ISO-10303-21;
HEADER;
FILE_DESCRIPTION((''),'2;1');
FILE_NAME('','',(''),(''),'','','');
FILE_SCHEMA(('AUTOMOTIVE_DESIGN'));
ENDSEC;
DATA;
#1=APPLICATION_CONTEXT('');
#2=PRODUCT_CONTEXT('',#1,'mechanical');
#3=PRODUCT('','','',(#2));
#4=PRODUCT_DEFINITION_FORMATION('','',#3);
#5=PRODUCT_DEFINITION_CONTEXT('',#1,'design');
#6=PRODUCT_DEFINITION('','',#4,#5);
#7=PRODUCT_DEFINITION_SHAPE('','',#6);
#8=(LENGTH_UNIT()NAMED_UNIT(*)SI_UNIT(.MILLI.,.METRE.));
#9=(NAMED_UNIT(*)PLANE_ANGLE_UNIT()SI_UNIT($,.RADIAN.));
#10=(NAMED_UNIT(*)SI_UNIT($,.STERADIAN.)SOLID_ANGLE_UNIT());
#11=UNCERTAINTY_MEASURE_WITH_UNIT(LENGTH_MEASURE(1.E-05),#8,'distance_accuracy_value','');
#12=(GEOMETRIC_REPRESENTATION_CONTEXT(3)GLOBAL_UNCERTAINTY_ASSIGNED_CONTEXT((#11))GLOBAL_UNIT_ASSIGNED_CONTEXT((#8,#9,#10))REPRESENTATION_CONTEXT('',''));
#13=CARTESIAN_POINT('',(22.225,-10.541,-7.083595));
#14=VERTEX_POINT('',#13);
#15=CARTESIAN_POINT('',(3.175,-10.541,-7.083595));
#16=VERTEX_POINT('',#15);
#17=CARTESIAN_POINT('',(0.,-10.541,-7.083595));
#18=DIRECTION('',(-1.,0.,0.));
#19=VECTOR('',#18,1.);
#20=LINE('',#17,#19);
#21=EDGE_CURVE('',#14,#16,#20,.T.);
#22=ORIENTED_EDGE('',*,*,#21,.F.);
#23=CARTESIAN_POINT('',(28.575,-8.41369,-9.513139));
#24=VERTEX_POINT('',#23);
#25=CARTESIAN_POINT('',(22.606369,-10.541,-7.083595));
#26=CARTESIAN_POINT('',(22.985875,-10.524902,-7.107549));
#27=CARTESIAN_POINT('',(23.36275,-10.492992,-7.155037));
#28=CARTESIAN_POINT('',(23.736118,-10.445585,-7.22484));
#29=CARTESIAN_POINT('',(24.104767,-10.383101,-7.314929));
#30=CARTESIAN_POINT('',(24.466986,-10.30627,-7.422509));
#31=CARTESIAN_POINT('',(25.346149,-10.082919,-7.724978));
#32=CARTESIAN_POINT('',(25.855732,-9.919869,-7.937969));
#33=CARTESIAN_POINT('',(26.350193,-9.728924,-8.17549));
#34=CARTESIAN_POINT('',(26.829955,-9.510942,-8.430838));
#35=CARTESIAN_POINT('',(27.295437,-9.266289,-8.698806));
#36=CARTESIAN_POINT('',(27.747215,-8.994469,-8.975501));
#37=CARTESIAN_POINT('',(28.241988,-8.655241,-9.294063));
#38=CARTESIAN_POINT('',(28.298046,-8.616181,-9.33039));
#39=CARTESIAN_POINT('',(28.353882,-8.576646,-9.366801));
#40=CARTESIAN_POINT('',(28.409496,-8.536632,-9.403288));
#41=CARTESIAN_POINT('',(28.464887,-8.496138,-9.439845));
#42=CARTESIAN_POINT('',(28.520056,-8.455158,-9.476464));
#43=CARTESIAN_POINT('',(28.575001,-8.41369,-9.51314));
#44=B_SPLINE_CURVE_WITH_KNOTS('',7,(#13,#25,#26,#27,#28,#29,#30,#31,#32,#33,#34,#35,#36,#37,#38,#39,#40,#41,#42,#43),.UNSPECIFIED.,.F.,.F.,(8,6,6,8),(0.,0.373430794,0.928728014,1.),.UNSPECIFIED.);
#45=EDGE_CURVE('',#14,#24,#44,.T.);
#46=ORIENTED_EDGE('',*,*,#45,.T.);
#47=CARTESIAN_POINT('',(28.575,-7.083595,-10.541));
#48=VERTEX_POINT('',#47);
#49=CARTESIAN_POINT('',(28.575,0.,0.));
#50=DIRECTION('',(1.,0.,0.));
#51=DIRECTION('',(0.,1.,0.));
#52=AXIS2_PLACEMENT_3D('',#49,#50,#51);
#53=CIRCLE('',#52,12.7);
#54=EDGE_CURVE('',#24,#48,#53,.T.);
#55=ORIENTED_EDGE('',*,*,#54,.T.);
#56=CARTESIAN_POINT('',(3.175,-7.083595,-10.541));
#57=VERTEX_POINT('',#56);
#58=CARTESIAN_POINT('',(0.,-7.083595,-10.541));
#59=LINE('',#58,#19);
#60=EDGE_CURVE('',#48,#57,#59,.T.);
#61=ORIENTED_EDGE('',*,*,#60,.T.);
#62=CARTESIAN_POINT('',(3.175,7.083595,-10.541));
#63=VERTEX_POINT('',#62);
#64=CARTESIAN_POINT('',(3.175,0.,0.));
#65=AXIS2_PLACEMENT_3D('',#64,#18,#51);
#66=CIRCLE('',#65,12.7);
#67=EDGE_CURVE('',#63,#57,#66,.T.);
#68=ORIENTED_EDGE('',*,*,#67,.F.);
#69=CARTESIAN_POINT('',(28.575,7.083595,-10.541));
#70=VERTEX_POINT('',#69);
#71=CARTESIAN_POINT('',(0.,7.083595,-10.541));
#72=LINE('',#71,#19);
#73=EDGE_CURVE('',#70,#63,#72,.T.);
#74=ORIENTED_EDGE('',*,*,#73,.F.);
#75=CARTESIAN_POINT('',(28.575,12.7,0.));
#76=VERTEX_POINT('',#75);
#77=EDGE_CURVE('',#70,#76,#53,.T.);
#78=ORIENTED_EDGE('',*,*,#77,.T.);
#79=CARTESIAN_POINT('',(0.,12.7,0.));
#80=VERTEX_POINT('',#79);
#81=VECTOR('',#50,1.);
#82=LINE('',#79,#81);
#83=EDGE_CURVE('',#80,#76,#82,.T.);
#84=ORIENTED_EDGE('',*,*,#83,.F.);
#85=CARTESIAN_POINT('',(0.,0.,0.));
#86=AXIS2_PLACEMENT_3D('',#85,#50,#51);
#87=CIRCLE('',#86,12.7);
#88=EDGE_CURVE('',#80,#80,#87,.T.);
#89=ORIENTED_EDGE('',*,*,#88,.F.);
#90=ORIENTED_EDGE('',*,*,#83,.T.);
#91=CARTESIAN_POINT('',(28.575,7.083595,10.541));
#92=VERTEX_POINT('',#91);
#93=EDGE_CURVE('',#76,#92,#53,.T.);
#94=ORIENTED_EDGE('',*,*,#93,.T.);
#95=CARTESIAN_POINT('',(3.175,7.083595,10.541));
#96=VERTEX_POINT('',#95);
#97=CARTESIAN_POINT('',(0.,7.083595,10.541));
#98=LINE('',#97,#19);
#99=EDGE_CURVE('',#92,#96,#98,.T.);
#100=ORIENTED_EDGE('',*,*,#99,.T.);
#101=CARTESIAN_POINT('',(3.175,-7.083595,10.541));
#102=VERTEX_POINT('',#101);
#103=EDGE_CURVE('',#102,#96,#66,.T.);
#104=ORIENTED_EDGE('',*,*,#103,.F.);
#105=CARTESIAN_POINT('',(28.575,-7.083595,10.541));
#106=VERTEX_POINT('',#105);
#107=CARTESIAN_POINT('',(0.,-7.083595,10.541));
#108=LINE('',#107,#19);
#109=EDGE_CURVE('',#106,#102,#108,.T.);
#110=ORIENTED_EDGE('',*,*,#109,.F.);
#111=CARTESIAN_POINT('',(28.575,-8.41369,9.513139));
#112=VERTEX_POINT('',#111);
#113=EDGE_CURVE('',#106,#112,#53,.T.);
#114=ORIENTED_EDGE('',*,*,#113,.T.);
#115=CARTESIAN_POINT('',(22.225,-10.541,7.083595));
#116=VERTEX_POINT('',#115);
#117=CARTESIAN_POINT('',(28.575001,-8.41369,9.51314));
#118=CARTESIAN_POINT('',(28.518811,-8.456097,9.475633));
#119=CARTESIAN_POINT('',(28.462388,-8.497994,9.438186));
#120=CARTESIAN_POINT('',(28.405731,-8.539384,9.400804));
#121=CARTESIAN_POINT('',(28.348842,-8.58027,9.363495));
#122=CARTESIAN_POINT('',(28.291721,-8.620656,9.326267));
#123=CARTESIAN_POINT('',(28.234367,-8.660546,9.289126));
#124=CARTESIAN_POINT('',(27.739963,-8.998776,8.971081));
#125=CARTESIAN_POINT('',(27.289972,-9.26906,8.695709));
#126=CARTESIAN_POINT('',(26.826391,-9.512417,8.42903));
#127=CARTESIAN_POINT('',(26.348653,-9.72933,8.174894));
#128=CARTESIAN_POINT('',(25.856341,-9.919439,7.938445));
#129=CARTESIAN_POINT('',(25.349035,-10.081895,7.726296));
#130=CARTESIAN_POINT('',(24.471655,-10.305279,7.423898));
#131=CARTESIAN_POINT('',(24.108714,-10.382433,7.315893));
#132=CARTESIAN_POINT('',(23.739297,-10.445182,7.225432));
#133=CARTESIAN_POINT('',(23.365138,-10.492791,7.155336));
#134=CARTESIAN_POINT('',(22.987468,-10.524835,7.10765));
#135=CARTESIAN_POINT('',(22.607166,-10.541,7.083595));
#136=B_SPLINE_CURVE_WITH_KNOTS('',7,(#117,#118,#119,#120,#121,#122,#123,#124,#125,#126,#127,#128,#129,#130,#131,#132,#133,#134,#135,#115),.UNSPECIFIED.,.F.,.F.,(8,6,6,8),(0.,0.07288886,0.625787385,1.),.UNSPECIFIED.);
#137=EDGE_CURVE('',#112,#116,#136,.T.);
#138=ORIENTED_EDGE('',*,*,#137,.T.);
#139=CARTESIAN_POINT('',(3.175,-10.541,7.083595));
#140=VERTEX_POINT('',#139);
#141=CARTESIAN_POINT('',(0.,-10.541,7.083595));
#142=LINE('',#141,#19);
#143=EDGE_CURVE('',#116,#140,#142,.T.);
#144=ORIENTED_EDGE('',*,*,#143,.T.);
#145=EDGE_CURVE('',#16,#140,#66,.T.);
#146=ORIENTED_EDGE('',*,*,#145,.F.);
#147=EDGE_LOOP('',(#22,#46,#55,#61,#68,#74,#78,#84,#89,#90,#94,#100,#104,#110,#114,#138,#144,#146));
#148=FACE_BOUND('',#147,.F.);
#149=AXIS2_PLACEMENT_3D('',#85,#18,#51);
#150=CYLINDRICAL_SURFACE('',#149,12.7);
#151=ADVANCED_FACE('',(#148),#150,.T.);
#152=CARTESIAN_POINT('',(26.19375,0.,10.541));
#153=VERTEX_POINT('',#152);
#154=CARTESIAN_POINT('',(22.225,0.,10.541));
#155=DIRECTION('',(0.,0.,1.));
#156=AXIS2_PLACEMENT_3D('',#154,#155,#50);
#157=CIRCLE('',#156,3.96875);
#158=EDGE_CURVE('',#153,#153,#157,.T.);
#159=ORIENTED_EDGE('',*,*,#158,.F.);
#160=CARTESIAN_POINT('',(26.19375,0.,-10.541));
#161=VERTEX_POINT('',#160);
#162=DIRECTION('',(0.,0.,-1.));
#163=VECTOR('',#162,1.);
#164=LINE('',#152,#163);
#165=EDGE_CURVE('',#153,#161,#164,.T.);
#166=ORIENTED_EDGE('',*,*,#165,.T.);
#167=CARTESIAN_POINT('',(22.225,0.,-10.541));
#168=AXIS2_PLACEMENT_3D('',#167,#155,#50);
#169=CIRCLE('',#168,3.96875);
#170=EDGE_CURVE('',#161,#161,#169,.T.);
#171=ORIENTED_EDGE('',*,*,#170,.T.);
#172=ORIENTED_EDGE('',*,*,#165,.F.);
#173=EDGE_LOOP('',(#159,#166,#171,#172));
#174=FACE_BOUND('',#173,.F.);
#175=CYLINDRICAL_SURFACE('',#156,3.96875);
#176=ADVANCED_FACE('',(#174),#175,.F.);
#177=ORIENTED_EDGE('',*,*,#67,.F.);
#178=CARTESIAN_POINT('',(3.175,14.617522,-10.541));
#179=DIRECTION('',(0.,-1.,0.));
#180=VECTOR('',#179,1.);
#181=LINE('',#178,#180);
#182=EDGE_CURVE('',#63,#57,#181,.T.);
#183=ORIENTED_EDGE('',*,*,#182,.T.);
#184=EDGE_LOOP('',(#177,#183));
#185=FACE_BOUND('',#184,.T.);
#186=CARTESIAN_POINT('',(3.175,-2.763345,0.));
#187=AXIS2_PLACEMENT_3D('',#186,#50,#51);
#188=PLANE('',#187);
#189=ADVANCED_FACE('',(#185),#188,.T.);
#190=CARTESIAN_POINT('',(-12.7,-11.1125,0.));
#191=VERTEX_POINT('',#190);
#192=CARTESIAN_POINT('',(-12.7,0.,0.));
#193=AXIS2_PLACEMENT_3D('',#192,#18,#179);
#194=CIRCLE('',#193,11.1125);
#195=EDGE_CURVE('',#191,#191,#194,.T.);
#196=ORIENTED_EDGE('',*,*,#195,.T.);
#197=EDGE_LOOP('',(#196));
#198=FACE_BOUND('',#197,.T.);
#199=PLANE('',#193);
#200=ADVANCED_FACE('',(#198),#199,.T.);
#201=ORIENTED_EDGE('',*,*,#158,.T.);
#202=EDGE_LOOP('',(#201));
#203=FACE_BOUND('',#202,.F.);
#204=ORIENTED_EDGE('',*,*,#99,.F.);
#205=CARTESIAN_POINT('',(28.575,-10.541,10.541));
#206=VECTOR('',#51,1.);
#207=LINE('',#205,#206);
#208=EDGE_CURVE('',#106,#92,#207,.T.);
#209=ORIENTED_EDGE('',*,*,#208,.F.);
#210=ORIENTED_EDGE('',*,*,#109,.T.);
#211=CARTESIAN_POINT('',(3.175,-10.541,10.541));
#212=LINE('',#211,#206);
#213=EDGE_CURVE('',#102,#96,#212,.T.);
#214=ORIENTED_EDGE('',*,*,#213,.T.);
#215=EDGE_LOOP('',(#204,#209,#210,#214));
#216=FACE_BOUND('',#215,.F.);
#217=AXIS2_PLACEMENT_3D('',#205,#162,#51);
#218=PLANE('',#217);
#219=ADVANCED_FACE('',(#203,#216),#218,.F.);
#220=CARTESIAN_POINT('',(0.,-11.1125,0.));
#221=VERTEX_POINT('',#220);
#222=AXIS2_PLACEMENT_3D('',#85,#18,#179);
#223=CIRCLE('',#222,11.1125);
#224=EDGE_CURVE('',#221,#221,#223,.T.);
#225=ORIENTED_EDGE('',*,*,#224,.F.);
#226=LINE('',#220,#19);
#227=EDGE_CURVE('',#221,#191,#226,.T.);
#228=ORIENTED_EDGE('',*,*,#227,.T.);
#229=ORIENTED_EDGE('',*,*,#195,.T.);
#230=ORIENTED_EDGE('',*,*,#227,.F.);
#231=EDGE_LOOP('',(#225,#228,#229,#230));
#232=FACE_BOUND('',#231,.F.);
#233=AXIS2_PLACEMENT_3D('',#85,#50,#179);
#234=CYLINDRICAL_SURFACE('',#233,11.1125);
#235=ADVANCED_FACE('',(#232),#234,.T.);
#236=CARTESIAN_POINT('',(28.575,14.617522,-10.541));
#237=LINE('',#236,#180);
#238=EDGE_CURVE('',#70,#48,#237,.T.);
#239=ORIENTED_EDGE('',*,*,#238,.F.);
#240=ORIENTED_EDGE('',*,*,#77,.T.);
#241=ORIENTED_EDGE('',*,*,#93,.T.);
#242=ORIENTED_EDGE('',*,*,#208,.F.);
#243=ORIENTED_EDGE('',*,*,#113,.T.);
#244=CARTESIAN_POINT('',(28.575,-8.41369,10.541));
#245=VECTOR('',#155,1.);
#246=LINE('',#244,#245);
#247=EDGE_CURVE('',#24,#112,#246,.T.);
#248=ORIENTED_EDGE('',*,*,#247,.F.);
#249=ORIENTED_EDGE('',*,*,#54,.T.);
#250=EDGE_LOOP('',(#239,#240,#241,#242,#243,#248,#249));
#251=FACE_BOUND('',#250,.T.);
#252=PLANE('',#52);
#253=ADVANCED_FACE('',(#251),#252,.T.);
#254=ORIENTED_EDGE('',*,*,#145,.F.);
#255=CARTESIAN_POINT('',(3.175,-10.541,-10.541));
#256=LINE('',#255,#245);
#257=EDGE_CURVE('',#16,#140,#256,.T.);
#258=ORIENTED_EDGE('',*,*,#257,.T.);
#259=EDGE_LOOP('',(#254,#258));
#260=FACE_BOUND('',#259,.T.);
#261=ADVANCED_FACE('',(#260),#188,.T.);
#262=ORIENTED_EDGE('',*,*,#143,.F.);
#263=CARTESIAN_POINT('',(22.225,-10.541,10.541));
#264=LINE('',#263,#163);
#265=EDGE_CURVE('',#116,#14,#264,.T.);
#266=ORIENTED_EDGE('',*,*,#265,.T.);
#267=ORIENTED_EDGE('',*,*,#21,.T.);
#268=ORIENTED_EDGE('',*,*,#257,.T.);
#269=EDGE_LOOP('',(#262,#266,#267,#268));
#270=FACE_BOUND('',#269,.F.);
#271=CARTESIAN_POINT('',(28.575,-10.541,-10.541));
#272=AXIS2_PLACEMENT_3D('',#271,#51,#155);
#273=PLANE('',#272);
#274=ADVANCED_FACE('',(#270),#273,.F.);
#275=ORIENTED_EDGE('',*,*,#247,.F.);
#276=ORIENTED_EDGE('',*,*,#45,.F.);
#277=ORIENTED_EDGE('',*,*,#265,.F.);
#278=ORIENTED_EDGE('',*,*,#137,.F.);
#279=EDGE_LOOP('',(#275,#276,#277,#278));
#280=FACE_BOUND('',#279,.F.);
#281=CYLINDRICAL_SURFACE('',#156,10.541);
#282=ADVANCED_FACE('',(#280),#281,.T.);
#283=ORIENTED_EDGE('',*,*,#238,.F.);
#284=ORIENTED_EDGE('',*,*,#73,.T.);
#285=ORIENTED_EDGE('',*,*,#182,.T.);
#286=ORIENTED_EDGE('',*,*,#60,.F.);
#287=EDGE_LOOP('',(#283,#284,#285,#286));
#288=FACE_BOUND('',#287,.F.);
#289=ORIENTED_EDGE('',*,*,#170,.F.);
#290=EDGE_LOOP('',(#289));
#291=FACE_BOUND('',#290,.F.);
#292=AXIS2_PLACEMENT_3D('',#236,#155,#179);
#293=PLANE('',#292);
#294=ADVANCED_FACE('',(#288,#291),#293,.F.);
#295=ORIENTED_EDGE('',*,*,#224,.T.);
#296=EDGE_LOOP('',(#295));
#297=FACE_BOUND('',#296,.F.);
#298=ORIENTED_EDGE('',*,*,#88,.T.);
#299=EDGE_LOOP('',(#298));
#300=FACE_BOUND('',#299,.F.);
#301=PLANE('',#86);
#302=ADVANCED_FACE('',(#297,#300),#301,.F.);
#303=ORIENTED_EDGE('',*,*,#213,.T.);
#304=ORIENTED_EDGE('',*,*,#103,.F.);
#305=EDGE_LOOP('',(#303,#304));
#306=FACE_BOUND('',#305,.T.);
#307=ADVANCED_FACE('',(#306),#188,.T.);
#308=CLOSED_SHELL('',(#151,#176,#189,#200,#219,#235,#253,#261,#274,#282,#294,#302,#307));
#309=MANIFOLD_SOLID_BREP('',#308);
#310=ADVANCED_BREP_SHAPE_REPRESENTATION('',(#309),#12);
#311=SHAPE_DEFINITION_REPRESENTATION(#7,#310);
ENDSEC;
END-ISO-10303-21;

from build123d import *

# Parameters (mm, degrees)
F0_R     = 12.7
F1_DEPTH = 28.575
F2_R     = 11.1125
F3_DEPTH = 12.7
F5_DEPTH = 25.4
F6_R     = 3.96875
F7_DEPTH = 23.242
F9_DEPTH = 23.242


with BuildPart() as f1:
    # F0 (on Right) → F1 (new body)
    with BuildSketch(Plane.YZ):
        Circle(F0_R)
    extrude(amount=F1_DEPTH)

    # F2 (on face) → F3 (join)
    with BuildSketch(Plane(origin=(0, 0, 0), x_dir=(0, -1, 0), z_dir=(-1, 0, 0))):
        Circle(F2_R)
    extrude(amount=F3_DEPTH)

    # F4 (on face) → F5 (cut)
    with BuildSketch(Plane.YZ.offset(28.575)):
        with BuildLine():
            Line((-10.541, 7.0835950618), (-10.541, 10.541))
            Line((-10.541, 10.541), (-7.0835950618, 10.541))
            ThreePointArc((-7.0835950618, 10.541), (0, 12.7), (7.0835950618, 10.541))
            Line((7.0835950618, 10.541), (14.6175222471, 10.541))
            Line((14.6175222471, 10.541), (14.6175222471, 13.3875589818))
            Line((14.6175222471, 13.3875589818), (-14.6175222471, 13.3875589818))
            Line((-14.6175222471, 13.3875589818), (-14.6175222471, -13.3875589818))
            Line((-14.6175222471, -13.3875589818), (14.6175222471, -13.3875589818))
            Line((14.6175222471, -13.3875589818), (14.6175222471, -10.541))
            Line((14.6175222471, -10.541), (7.0835950618, -10.541))
            ThreePointArc((7.0835950618, -10.541), (0, -12.7), (-7.0835950618, -10.541))
            Line((-7.0835950618, -10.541), (-10.541, -10.541))
            Line((-10.541, -10.541), (-10.541, -7.0835950618))
            ThreePointArc((-10.541, -7.0835950618), (-12.7, 0), (-10.541, 7.0835950618))
        make_face()
        with BuildLine():
            ThreePointArc((7.0835950618, 10.541), (0, 12.7), (-7.0835950618, 10.541))
            Line((-7.0835950618, 10.541), (7.0835950618, 10.541))
        make_face()
        with BuildLine():
            Line((-10.541, -7.0835950618), (-10.541, 7.0835950618))
            ThreePointArc((-10.541, 7.0835950618), (-12.7, 0), (-10.541, -7.0835950618))
        make_face()
        with BuildLine():
            Line((7.0835950618, -10.541), (-7.0835950618, -10.541))
            ThreePointArc((-7.0835950618, -10.541), (0, -12.7), (7.0835950618, -10.541))
        make_face()
    extrude(amount=-F5_DEPTH, mode=Mode.SUBTRACT)

    # F6 (on face) → F7 (cut, through all)
    with BuildSketch(Plane.XY.offset(10.541)):
        with Locations((22.225, 0)):
            Circle(F6_R)
    extrude(amount=-F7_DEPTH, mode=Mode.SUBTRACT)

    # F8 (on face) → F9 (cut, through all)
    with BuildSketch(Plane.XY.offset(10.541)):
        with BuildLine():
            ThreePointArc((32.766, 0), (29.6786125805, -7.4536125805), (22.225, -10.541))
            Line((22.225, -10.541), (22.225, -14.2959095994))
            ThreePointArc((22.225, -14.2959095994), (32.333734621, -10.108734621), (36.5209095994, 0))
            Line((36.5209095994, 0), (32.766, 0))
        make_face()
    extrude(amount=-F9_DEPTH, mode=Mode.SUBTRACT)


solid = f1.part
